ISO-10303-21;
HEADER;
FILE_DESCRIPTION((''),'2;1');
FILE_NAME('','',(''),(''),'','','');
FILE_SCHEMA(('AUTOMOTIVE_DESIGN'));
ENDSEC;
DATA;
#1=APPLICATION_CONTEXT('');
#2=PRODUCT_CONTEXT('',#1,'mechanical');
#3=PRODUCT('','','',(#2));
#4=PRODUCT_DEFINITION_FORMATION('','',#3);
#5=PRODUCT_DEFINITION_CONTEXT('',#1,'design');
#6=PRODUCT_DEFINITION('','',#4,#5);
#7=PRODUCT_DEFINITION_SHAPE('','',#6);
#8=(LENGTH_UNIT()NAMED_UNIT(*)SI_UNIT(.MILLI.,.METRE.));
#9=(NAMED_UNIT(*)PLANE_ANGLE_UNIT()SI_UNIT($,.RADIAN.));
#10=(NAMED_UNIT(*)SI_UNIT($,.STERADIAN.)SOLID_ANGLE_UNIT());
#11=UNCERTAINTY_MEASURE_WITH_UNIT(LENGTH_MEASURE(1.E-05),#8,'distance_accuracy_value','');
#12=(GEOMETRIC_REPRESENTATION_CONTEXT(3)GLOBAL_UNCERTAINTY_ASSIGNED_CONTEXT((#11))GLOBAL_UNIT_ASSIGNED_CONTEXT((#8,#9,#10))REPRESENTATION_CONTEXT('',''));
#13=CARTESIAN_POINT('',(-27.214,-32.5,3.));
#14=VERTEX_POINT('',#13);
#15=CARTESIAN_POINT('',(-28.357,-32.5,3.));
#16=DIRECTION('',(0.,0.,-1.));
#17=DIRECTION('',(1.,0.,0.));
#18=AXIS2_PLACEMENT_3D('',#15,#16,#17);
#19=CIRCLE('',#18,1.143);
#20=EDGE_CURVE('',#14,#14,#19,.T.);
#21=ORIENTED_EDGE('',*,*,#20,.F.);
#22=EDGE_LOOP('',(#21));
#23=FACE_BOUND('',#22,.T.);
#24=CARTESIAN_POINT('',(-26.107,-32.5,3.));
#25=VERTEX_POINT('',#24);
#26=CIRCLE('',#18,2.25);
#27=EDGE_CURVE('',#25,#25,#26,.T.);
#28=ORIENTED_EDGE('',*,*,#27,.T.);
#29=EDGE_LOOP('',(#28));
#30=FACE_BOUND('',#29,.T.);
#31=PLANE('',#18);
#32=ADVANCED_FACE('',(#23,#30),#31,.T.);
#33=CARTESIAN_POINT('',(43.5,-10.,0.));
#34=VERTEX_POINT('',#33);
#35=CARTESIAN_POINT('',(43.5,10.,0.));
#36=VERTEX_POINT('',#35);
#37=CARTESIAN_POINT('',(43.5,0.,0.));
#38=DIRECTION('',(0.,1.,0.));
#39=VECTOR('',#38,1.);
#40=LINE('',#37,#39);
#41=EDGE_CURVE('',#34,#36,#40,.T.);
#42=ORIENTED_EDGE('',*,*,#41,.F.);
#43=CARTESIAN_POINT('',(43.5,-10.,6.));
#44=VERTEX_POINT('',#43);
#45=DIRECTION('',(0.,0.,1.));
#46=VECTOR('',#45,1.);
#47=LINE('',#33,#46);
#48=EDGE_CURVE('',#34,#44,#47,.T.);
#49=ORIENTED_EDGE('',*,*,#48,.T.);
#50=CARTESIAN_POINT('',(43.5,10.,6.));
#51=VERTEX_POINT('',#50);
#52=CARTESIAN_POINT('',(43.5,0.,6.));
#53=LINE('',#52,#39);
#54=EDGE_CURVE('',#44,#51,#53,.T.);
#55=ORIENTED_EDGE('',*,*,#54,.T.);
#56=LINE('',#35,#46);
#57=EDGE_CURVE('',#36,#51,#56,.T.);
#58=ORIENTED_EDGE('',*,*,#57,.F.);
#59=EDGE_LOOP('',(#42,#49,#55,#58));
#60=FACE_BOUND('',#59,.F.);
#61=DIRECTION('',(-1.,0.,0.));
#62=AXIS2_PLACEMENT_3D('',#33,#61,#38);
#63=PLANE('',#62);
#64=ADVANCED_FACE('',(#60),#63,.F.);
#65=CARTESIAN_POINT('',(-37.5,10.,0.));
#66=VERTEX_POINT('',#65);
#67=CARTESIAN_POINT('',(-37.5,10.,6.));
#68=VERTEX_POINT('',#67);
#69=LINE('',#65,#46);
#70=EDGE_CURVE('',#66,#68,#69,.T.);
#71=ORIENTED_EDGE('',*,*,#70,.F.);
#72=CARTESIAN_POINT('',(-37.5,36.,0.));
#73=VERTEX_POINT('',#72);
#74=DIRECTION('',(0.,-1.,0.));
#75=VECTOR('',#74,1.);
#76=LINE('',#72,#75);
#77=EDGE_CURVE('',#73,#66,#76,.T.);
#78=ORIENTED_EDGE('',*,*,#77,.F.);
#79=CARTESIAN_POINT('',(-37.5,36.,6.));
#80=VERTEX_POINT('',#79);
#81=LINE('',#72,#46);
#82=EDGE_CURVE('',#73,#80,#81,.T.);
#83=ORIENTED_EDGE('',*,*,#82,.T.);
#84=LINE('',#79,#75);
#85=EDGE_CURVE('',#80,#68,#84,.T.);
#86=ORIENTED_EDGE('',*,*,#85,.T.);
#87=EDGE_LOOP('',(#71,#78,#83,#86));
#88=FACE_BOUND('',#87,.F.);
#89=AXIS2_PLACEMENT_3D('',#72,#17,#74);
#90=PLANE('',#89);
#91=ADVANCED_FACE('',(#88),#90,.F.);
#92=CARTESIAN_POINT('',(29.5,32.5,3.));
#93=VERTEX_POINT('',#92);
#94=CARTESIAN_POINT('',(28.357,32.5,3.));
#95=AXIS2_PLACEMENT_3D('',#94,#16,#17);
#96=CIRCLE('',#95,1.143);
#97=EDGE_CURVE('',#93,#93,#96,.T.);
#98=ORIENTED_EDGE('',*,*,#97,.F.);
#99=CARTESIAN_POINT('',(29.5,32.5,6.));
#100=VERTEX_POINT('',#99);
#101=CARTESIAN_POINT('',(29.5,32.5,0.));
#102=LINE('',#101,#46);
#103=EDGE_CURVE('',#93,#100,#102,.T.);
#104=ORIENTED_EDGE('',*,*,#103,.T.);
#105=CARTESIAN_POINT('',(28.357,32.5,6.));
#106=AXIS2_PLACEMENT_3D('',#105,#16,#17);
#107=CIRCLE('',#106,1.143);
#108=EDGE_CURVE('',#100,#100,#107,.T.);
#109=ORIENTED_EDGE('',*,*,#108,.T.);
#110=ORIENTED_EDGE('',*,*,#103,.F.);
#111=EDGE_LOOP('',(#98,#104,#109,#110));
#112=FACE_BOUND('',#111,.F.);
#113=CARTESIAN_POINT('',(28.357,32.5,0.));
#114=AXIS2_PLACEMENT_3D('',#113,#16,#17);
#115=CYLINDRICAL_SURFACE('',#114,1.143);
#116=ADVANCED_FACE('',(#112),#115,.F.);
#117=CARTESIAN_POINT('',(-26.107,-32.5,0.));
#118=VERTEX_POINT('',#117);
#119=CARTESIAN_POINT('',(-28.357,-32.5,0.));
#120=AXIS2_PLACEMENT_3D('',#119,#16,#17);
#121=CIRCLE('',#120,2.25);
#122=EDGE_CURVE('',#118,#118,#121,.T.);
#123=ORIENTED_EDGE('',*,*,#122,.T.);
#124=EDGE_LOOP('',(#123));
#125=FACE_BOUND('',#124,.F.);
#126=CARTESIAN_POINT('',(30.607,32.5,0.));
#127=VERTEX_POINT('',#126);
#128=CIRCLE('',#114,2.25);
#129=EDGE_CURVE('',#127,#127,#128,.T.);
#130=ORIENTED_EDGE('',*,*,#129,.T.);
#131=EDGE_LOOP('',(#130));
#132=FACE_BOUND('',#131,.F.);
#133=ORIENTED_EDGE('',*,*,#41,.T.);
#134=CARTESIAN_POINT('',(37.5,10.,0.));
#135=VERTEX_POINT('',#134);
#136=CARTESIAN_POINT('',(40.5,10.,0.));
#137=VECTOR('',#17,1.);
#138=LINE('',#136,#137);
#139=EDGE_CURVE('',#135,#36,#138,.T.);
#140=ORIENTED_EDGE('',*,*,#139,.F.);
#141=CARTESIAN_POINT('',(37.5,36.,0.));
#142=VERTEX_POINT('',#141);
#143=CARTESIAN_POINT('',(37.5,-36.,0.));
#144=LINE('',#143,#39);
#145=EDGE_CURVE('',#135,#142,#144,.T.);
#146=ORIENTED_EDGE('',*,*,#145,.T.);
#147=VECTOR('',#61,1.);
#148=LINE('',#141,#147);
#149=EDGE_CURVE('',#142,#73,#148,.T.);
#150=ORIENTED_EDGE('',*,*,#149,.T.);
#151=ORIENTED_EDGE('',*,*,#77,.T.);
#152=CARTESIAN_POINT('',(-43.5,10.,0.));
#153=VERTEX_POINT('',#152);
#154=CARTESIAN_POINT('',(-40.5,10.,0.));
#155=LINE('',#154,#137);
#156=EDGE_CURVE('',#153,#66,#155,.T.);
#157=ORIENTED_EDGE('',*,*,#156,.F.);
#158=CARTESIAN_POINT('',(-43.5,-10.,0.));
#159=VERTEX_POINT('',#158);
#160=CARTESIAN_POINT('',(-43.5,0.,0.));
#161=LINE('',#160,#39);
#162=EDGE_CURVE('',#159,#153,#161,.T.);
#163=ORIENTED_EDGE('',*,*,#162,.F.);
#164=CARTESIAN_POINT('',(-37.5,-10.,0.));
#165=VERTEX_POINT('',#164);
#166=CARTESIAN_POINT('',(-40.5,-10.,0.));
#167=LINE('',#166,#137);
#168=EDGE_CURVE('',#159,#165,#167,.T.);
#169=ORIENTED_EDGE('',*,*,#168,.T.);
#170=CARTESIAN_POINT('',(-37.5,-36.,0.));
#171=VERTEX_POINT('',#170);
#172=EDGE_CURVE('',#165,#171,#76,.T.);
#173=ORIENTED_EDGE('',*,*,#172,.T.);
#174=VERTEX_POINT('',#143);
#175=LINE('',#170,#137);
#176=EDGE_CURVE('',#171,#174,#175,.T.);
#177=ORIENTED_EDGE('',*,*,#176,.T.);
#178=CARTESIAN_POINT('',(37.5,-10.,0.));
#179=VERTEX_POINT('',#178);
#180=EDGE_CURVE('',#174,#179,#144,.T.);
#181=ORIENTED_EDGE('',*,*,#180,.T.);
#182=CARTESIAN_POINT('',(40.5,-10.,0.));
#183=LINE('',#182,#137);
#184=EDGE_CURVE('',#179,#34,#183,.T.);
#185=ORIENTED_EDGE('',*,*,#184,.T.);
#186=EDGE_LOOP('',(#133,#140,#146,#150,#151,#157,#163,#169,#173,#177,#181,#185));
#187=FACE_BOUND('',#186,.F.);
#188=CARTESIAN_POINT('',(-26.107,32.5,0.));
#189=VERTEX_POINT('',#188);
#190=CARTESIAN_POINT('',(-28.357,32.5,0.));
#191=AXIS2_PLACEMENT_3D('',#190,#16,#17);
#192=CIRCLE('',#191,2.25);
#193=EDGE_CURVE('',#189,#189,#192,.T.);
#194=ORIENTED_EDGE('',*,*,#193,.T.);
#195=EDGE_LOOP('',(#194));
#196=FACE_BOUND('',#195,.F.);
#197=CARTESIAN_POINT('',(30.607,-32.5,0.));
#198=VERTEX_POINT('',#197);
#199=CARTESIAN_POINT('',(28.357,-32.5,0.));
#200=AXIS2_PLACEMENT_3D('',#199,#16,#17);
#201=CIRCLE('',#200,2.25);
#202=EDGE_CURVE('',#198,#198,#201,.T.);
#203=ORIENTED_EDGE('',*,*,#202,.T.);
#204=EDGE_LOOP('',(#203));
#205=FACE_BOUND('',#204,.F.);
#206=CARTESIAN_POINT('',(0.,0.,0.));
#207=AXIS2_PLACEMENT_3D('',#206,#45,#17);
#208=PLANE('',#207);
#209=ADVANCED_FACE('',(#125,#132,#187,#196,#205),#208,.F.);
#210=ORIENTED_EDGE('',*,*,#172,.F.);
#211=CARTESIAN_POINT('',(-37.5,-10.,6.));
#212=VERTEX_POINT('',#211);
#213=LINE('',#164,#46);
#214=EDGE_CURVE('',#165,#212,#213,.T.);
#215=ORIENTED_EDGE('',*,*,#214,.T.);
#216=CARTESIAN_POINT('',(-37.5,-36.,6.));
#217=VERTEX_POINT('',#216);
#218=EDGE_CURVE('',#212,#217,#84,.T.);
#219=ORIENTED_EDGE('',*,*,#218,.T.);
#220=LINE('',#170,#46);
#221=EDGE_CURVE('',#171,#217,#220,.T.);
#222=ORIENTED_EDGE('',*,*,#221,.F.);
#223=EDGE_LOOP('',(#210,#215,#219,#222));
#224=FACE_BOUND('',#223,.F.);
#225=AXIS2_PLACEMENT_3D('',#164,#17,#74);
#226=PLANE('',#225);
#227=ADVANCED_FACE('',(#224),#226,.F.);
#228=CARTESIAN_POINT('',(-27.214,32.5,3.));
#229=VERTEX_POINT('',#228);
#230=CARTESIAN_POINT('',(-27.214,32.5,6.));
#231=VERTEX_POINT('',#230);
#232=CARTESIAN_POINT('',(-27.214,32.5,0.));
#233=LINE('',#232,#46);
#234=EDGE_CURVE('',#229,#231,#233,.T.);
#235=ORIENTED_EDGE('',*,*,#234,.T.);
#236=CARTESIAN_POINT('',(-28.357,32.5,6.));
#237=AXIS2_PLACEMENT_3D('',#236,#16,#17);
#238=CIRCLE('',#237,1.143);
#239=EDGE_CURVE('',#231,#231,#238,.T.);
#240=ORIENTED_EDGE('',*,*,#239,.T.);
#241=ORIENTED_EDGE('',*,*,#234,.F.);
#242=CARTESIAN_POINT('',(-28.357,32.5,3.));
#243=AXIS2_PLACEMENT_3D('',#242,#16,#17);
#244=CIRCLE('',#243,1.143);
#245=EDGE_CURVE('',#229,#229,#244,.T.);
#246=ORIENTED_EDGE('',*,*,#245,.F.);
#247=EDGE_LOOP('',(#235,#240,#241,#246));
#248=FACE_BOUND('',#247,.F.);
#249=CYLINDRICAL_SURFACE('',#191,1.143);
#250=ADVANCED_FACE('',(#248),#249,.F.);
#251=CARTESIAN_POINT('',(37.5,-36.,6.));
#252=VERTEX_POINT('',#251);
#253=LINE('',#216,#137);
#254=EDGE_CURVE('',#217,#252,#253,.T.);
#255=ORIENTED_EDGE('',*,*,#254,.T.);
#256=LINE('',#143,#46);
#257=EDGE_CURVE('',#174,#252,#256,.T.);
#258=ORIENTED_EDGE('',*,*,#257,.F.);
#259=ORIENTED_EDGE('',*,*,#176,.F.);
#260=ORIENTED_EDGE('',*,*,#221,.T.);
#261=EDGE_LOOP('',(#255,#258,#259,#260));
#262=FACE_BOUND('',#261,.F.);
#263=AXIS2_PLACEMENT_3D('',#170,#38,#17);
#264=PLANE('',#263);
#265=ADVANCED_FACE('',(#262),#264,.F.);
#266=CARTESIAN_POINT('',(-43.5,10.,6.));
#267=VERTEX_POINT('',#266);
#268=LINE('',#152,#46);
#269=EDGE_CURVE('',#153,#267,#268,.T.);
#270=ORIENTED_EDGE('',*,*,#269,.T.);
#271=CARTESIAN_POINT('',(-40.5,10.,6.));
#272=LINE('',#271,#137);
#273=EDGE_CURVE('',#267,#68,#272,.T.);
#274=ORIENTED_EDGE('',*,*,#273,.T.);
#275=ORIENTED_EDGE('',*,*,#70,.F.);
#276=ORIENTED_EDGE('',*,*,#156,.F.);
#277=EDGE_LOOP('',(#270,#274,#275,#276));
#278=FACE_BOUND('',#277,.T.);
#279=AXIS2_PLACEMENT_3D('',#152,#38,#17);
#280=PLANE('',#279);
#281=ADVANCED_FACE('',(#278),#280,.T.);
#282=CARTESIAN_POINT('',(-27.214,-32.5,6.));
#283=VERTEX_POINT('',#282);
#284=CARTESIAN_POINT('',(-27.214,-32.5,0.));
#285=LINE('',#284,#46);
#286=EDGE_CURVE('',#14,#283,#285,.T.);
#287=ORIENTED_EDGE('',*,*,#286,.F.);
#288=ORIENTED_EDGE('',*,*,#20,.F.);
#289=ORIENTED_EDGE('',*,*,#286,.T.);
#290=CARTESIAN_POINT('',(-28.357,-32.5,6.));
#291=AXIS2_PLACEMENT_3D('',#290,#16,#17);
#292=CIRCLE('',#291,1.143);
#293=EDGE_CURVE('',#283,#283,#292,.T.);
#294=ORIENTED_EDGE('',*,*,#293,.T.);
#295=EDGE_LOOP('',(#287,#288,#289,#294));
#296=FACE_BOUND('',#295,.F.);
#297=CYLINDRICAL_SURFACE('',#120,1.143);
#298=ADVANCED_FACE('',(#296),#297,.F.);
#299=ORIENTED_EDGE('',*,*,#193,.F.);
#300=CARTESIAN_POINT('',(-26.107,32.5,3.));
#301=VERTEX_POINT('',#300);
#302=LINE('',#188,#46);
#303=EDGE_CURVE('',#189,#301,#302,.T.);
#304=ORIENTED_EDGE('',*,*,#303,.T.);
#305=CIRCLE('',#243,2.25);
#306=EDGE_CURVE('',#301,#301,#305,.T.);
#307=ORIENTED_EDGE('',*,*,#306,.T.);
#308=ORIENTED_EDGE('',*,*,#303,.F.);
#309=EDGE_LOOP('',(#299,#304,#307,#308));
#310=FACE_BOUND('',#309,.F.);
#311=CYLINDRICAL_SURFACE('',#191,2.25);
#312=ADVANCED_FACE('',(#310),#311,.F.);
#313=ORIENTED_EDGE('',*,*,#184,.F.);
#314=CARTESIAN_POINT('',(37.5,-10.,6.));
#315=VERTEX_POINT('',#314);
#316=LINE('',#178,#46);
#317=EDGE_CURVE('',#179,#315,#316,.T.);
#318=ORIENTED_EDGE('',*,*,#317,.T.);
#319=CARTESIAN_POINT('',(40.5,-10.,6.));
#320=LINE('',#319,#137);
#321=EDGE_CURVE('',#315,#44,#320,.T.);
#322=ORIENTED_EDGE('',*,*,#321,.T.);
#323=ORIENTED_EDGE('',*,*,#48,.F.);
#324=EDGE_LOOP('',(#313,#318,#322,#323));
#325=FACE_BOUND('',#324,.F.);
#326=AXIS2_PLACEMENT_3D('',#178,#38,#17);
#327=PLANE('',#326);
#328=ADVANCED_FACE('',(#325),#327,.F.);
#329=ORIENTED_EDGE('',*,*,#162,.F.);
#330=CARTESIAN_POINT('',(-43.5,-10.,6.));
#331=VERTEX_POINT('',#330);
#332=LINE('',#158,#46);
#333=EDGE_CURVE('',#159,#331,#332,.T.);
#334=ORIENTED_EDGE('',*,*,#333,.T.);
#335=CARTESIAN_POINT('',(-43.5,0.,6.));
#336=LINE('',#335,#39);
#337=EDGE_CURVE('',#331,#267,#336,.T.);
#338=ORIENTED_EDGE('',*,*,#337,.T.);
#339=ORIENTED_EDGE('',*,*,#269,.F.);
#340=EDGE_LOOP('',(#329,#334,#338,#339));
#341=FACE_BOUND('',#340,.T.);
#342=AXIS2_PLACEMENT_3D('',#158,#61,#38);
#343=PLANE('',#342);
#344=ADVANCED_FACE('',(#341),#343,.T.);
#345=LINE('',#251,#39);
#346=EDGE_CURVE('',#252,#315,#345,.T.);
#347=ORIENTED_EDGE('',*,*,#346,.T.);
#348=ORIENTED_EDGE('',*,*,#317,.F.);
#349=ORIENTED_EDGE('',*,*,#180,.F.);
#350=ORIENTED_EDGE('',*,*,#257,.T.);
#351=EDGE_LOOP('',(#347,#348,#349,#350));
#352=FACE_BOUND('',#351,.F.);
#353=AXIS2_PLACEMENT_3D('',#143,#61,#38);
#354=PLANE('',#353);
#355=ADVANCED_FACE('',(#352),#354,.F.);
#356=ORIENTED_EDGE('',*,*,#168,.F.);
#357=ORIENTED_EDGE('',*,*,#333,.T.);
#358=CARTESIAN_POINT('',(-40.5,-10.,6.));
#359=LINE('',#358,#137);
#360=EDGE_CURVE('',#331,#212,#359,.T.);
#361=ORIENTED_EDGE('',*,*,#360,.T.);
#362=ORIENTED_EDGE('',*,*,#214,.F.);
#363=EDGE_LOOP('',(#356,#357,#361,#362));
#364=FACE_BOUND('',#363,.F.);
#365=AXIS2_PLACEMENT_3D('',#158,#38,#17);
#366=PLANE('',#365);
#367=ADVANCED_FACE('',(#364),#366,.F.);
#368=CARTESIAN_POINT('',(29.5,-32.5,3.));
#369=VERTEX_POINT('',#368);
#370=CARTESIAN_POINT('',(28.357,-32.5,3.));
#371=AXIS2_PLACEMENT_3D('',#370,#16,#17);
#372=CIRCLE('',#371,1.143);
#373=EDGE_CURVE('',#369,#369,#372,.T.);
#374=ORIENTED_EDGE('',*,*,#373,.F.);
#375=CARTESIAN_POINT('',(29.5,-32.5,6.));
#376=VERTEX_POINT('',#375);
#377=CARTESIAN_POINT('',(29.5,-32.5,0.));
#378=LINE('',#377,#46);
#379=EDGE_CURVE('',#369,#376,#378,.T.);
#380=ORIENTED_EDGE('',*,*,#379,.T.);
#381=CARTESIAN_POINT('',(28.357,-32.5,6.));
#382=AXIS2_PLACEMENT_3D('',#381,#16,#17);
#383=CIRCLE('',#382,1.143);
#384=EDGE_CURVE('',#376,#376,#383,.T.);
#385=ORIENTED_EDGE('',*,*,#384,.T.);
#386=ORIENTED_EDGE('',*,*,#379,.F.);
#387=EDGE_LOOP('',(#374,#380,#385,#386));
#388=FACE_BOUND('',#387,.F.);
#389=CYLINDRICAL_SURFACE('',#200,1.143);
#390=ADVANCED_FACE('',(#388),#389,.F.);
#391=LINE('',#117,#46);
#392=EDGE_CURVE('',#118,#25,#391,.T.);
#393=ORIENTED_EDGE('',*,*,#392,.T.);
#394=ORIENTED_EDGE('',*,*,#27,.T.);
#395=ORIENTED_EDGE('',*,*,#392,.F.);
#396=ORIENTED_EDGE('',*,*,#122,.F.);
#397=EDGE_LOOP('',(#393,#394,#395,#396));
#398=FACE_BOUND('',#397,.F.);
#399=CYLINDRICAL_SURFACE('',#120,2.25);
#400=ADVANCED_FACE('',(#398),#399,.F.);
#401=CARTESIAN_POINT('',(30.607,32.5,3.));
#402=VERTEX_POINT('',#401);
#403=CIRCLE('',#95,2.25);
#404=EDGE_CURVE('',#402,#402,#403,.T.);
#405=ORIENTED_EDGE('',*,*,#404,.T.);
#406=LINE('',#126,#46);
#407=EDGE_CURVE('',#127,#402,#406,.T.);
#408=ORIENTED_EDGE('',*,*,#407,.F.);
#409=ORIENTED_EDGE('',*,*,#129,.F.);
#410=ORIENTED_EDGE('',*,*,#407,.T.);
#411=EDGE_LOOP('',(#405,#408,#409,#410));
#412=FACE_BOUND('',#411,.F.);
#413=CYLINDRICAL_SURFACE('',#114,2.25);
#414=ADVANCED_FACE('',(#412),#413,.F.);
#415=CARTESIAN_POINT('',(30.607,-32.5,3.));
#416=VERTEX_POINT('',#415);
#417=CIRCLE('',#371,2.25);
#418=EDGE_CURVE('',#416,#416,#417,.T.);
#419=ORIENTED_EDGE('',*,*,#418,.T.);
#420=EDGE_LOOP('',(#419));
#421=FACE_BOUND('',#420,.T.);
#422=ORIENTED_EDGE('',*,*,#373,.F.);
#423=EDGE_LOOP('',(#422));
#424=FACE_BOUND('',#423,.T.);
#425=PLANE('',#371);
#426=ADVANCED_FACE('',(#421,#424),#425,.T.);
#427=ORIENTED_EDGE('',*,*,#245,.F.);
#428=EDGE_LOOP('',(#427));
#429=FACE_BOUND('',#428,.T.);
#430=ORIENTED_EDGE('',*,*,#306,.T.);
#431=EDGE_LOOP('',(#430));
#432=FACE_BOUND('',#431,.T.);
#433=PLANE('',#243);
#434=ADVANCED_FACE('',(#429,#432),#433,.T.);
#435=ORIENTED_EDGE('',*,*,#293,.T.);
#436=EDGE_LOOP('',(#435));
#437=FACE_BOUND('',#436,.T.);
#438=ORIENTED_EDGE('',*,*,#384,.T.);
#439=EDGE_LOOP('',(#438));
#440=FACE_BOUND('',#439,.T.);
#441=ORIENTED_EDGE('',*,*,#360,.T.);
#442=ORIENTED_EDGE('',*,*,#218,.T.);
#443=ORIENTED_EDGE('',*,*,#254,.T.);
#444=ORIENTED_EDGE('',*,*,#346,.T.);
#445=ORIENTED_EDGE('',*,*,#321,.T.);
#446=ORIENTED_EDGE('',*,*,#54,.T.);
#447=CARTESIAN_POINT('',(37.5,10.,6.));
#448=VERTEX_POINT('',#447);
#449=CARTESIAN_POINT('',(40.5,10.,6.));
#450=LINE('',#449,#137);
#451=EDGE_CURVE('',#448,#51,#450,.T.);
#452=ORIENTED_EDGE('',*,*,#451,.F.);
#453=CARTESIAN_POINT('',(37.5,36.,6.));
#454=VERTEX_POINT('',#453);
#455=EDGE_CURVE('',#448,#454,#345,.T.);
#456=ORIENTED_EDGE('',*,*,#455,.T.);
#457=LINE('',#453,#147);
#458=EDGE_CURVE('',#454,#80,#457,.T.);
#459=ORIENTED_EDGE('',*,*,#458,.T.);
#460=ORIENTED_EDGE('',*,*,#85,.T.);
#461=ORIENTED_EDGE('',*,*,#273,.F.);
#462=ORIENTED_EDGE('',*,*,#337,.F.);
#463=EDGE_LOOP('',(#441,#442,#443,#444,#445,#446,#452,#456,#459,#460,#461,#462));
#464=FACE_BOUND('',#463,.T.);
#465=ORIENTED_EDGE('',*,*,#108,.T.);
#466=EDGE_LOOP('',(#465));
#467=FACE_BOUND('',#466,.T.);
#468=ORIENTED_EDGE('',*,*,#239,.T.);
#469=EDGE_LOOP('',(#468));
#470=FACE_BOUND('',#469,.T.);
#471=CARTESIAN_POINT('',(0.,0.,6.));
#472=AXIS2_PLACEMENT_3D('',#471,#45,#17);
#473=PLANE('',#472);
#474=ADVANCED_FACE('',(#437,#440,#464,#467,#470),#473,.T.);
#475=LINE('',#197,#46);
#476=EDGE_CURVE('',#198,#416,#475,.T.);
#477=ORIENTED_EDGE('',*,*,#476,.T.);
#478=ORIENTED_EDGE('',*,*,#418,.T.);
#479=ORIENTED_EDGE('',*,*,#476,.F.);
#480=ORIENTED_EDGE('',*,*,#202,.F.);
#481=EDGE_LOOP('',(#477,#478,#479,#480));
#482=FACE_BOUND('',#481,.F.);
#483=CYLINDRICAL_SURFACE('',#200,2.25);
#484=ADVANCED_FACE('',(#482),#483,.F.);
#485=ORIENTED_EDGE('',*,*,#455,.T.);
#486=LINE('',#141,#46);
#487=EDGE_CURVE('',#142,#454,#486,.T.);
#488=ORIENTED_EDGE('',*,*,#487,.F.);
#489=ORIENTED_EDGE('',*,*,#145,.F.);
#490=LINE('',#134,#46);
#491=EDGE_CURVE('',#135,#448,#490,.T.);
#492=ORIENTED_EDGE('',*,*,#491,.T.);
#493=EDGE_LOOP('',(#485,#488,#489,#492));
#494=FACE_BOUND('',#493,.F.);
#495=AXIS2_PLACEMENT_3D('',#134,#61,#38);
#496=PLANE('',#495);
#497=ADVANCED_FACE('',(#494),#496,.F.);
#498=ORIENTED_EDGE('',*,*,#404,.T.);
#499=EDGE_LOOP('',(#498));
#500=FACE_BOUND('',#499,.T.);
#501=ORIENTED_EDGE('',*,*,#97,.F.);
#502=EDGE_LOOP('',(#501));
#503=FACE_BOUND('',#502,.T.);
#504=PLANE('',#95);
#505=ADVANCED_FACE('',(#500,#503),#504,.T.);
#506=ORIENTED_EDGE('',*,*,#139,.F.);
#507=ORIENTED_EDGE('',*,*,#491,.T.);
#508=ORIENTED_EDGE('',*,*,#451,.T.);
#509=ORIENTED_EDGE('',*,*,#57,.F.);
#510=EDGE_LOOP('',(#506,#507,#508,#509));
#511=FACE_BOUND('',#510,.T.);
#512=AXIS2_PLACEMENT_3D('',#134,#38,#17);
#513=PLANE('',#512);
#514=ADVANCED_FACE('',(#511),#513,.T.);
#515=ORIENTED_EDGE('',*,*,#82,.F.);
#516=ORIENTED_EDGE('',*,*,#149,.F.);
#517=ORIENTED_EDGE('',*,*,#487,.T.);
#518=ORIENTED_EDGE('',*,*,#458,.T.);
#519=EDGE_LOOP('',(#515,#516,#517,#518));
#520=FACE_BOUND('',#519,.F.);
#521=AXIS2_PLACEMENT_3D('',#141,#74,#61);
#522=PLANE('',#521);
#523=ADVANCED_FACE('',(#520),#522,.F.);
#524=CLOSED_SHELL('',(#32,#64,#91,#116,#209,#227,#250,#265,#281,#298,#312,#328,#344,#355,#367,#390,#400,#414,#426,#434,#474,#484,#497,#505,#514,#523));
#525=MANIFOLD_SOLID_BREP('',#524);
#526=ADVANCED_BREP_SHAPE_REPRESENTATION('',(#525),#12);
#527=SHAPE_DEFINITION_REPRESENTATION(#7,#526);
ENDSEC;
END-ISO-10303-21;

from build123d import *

# Parameters (mm, degrees)
F0_W     = 6
F0_H     = 20
F1_DEPTH = 6
F2_R     = 2.25
F2_R_2   = 1.143
F3_DEPTH = 3
F4_DEPTH = 6


# Not quite as in the source:
# - a feature names something its author has since deleted; it is built from what else it names


with BuildPart() as f1:
    # F0 (on Top) → F1 (new body)
    with BuildSketch(Plane.XY):
        Polygon((-37.5, -36), (37.5, -36), (37.5, -10), (37.5, 10), (37.5, 36), (-37.5, 36), (-37.5, 10), (-37.5, -10), align=None)
        with Locations((40.5, 0)):
            Rectangle(F0_W, F0_H)
        with Locations((-40.5, 0)):
            Rectangle(F0_W, F0_H)
    extrude(amount=F1_DEPTH)

    # F2 (on face) → F3 (cut)
    with BuildSketch(Plane(origin=(0, 0, 0), x_dir=(1, 0, 0), z_dir=(0, 0, -1))):
        with Locations((-28.357, -32.5)):
            Circle(F2_R)
        with Locations((-28.357, -32.5)):
            Circle(F2_R_2, mode=Mode.SUBTRACT)
        with Locations((28.357, -32.5)):
            Circle(F2_R)
        with Locations((28.357, -32.5)):
            Circle(F2_R_2, mode=Mode.SUBTRACT)
        with Locations((-28.357, 32.5)):
            Circle(F2_R)
        with Locations((-28.357, 32.5)):
            Circle(F2_R_2, mode=Mode.SUBTRACT)
        with Locations((28.357, 32.5)):
            Circle(F2_R)
        with Locations((28.357, 32.5)):
            Circle(F2_R_2, mode=Mode.SUBTRACT)
    extrude(amount=-F3_DEPTH, mode=Mode.SUBTRACT)

    # F2 (on face) → F4 (cut, through all)
    with BuildSketch(Plane(origin=(0, 0, 0), x_dir=(1, 0, 0), z_dir=(0, 0, -1))):
        with Locations((-28.357, -32.5)):
            Circle(F2_R_2)
        with Locations((28.357, -32.5)):
            Circle(F2_R_2)
        with Locations((28.357, 32.5)):
            Circle(F2_R_2)
        with Locations((-28.357, 32.5)):
            Circle(F2_R_2)
    extrude(amount=-F4_DEPTH, mode=Mode.SUBTRACT)


solid = f1.part
